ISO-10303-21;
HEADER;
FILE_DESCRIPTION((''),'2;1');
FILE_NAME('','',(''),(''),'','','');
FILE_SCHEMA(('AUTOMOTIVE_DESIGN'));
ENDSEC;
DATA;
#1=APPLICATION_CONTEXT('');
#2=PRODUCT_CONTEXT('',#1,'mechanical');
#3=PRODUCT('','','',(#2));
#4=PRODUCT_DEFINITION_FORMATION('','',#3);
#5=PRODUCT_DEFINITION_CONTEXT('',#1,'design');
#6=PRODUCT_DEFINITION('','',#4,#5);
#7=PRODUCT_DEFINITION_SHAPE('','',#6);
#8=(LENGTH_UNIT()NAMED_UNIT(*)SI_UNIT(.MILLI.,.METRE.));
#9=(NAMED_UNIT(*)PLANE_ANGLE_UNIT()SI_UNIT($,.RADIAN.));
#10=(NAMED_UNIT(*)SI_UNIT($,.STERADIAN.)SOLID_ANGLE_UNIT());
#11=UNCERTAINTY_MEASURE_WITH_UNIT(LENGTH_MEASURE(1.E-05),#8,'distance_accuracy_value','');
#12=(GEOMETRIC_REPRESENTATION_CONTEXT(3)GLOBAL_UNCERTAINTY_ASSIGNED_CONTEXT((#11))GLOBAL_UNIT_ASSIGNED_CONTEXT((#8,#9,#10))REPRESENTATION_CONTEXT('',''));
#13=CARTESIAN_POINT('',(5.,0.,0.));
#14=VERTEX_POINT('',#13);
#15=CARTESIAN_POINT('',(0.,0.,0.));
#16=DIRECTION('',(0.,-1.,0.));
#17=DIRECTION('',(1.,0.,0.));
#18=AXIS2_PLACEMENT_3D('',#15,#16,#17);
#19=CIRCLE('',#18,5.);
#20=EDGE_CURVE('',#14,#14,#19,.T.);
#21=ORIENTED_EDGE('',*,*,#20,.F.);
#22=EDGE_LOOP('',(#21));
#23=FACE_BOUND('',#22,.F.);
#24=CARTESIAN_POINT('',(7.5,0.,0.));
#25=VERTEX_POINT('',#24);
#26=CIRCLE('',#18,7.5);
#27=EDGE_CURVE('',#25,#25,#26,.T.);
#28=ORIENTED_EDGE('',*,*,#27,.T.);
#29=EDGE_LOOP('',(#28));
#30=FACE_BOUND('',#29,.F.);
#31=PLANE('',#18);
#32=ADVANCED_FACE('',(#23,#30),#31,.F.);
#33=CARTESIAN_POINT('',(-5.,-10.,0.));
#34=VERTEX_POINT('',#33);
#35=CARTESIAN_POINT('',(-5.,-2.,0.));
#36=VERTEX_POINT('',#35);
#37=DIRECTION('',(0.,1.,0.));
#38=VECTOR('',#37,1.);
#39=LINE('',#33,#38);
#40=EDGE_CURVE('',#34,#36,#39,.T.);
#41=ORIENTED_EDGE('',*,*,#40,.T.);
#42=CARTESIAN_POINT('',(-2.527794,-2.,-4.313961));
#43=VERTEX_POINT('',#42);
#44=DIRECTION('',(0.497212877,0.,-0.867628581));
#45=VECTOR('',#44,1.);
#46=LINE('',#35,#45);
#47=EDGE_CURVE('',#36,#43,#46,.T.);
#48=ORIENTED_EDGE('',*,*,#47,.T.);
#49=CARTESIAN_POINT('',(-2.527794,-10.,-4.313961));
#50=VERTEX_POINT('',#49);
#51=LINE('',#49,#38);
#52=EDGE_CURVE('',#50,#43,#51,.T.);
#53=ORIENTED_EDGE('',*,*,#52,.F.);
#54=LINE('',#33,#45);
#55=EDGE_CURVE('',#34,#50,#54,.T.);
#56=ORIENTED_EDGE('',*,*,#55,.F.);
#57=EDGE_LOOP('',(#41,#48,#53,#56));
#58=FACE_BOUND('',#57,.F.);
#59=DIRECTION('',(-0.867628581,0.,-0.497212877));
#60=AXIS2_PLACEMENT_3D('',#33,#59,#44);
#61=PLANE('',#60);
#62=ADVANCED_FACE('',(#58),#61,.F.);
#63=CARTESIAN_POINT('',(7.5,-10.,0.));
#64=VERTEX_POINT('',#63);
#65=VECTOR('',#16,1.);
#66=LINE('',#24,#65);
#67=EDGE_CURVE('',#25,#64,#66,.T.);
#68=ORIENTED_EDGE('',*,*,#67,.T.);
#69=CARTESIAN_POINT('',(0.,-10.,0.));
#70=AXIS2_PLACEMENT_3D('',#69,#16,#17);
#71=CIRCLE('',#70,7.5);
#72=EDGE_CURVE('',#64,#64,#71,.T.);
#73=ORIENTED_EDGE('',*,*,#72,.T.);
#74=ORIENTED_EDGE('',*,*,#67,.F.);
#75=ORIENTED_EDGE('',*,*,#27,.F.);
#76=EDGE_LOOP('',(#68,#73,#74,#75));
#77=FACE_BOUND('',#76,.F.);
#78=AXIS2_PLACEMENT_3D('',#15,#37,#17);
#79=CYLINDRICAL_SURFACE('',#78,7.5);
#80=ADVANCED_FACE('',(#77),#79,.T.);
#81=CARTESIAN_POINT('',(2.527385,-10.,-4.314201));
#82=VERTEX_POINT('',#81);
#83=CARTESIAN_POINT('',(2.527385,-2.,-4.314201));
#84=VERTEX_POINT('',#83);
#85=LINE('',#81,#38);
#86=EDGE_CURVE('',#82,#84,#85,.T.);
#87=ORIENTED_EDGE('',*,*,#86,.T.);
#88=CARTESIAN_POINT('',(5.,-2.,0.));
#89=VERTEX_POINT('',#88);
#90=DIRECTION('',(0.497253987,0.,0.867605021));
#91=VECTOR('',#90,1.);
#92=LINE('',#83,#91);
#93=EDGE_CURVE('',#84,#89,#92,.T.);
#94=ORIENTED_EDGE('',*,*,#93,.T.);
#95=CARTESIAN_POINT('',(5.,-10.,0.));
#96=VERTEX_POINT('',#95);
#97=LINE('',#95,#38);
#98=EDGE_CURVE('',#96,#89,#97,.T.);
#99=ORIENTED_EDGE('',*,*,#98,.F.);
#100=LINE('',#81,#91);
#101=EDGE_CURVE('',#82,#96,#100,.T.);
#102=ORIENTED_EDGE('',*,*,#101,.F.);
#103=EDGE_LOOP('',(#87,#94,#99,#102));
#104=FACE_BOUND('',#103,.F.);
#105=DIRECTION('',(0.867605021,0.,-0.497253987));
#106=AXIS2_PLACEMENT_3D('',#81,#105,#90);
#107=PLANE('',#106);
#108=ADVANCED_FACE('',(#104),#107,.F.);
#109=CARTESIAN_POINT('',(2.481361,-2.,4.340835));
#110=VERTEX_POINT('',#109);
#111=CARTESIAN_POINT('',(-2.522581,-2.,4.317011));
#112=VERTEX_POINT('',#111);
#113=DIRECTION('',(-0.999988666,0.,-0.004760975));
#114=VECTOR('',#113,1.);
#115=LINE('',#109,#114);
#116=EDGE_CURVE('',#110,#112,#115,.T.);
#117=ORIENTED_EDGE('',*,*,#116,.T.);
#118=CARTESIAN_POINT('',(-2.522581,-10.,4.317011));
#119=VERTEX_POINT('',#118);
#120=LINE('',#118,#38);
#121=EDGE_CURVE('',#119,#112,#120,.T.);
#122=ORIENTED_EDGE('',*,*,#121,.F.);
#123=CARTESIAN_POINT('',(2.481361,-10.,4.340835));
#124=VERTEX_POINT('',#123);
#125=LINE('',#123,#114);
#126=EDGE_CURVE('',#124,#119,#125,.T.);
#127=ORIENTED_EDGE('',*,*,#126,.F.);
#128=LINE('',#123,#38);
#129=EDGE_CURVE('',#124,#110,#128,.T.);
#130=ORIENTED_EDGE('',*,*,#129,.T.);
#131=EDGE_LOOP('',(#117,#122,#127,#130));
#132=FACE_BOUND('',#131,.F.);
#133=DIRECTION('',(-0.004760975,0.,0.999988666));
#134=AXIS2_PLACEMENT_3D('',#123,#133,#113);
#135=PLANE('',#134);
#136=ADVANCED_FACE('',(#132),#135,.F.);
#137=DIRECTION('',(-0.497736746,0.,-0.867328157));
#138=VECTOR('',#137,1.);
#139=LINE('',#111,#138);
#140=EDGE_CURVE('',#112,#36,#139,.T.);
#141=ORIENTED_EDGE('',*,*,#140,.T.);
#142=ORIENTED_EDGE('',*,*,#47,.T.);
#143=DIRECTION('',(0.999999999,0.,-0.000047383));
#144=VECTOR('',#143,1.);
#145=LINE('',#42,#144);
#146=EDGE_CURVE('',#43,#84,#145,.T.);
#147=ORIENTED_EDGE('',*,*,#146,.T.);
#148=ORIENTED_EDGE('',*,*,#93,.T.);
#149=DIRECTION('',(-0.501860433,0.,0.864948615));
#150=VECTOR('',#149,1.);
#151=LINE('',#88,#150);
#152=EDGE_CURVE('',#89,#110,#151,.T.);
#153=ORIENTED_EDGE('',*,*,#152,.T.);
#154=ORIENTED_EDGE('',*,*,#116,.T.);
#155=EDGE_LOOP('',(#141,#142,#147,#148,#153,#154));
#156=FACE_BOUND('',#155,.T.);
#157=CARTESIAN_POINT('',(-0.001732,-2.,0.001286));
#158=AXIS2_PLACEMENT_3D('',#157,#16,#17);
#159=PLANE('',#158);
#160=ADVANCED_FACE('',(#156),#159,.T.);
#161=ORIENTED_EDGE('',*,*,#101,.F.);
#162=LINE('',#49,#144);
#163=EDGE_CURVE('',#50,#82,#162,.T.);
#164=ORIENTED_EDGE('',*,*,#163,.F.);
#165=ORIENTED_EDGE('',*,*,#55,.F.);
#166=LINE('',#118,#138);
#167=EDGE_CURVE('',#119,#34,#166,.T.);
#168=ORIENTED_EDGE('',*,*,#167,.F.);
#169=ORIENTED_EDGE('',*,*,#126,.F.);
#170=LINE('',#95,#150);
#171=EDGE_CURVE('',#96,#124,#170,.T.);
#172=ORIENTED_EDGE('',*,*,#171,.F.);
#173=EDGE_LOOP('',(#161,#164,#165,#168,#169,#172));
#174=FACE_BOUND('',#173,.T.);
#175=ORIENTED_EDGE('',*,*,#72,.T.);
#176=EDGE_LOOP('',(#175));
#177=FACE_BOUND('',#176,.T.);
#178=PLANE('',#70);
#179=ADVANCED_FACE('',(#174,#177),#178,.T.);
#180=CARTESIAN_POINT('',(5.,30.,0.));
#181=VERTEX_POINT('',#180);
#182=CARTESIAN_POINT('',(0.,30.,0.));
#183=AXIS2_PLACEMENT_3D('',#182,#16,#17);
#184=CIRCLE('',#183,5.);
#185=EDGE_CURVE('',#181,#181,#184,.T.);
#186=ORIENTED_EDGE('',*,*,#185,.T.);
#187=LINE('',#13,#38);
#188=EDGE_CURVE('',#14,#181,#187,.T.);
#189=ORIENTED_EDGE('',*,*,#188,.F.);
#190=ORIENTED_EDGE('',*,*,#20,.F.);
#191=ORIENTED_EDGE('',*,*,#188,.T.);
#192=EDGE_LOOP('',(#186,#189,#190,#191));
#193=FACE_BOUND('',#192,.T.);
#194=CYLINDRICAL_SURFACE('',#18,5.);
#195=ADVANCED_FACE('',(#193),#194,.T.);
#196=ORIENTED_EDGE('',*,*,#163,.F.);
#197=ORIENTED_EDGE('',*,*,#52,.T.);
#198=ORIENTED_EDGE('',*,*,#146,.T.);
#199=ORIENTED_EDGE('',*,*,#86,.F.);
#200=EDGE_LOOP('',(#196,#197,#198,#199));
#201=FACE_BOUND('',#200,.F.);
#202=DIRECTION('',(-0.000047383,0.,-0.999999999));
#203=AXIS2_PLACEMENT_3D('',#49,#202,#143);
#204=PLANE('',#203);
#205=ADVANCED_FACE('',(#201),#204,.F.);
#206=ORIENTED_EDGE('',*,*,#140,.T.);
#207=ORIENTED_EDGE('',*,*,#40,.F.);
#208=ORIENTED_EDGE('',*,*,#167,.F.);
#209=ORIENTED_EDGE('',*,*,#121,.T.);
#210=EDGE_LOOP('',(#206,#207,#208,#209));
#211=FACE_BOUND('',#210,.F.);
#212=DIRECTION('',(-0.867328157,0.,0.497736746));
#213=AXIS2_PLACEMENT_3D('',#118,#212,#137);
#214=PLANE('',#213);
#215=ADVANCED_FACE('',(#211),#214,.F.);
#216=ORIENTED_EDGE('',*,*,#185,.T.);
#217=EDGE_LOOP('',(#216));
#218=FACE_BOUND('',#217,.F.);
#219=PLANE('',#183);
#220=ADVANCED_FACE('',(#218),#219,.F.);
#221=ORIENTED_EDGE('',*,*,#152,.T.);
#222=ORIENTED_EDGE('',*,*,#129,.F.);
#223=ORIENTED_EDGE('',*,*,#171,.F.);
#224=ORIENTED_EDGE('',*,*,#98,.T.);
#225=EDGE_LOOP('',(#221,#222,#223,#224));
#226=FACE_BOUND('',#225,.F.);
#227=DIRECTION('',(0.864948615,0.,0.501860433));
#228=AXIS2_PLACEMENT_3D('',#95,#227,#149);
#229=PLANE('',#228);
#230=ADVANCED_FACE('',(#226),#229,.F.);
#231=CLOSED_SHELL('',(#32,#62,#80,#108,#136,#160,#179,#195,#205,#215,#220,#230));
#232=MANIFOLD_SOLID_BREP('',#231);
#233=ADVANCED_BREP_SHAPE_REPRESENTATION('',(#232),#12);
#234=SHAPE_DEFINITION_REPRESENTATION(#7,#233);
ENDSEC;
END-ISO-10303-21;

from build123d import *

# Parameters (mm, degrees)
F0_R     = 5
F1_DEPTH = 30
F3_R     = 7.5
F4_DEPTH = 10
F7_DEPTH = 8


# Not quite as in the source:
# - a feature names something its author has since deleted; it is built from what else it names


with BuildPart() as f1:
    # F0 (on Front) → F1 (new body)
    with BuildSketch(Plane.XZ):
        Circle(F0_R)
    extrude(amount=-F1_DEPTH)

    # F3 (on offset) → F4 (join)
    with BuildSketch(Plane.XZ):
        Circle(F3_R)
    extrude(amount=F4_DEPTH)

    # F6 (on offset) → F7 (cut)
    with BuildSketch(Plane.XZ.offset(10)):
        Polygon((5, 0), (2.4813610619, 4.3408348599), (-2.5225813199, 4.3170109433), (-5, 0), (-2.5277935483, -4.313961031), (2.5273847237, -4.3142005584), align=None)
    extrude(amount=-F7_DEPTH, mode=Mode.SUBTRACT)


solid = f1.part
